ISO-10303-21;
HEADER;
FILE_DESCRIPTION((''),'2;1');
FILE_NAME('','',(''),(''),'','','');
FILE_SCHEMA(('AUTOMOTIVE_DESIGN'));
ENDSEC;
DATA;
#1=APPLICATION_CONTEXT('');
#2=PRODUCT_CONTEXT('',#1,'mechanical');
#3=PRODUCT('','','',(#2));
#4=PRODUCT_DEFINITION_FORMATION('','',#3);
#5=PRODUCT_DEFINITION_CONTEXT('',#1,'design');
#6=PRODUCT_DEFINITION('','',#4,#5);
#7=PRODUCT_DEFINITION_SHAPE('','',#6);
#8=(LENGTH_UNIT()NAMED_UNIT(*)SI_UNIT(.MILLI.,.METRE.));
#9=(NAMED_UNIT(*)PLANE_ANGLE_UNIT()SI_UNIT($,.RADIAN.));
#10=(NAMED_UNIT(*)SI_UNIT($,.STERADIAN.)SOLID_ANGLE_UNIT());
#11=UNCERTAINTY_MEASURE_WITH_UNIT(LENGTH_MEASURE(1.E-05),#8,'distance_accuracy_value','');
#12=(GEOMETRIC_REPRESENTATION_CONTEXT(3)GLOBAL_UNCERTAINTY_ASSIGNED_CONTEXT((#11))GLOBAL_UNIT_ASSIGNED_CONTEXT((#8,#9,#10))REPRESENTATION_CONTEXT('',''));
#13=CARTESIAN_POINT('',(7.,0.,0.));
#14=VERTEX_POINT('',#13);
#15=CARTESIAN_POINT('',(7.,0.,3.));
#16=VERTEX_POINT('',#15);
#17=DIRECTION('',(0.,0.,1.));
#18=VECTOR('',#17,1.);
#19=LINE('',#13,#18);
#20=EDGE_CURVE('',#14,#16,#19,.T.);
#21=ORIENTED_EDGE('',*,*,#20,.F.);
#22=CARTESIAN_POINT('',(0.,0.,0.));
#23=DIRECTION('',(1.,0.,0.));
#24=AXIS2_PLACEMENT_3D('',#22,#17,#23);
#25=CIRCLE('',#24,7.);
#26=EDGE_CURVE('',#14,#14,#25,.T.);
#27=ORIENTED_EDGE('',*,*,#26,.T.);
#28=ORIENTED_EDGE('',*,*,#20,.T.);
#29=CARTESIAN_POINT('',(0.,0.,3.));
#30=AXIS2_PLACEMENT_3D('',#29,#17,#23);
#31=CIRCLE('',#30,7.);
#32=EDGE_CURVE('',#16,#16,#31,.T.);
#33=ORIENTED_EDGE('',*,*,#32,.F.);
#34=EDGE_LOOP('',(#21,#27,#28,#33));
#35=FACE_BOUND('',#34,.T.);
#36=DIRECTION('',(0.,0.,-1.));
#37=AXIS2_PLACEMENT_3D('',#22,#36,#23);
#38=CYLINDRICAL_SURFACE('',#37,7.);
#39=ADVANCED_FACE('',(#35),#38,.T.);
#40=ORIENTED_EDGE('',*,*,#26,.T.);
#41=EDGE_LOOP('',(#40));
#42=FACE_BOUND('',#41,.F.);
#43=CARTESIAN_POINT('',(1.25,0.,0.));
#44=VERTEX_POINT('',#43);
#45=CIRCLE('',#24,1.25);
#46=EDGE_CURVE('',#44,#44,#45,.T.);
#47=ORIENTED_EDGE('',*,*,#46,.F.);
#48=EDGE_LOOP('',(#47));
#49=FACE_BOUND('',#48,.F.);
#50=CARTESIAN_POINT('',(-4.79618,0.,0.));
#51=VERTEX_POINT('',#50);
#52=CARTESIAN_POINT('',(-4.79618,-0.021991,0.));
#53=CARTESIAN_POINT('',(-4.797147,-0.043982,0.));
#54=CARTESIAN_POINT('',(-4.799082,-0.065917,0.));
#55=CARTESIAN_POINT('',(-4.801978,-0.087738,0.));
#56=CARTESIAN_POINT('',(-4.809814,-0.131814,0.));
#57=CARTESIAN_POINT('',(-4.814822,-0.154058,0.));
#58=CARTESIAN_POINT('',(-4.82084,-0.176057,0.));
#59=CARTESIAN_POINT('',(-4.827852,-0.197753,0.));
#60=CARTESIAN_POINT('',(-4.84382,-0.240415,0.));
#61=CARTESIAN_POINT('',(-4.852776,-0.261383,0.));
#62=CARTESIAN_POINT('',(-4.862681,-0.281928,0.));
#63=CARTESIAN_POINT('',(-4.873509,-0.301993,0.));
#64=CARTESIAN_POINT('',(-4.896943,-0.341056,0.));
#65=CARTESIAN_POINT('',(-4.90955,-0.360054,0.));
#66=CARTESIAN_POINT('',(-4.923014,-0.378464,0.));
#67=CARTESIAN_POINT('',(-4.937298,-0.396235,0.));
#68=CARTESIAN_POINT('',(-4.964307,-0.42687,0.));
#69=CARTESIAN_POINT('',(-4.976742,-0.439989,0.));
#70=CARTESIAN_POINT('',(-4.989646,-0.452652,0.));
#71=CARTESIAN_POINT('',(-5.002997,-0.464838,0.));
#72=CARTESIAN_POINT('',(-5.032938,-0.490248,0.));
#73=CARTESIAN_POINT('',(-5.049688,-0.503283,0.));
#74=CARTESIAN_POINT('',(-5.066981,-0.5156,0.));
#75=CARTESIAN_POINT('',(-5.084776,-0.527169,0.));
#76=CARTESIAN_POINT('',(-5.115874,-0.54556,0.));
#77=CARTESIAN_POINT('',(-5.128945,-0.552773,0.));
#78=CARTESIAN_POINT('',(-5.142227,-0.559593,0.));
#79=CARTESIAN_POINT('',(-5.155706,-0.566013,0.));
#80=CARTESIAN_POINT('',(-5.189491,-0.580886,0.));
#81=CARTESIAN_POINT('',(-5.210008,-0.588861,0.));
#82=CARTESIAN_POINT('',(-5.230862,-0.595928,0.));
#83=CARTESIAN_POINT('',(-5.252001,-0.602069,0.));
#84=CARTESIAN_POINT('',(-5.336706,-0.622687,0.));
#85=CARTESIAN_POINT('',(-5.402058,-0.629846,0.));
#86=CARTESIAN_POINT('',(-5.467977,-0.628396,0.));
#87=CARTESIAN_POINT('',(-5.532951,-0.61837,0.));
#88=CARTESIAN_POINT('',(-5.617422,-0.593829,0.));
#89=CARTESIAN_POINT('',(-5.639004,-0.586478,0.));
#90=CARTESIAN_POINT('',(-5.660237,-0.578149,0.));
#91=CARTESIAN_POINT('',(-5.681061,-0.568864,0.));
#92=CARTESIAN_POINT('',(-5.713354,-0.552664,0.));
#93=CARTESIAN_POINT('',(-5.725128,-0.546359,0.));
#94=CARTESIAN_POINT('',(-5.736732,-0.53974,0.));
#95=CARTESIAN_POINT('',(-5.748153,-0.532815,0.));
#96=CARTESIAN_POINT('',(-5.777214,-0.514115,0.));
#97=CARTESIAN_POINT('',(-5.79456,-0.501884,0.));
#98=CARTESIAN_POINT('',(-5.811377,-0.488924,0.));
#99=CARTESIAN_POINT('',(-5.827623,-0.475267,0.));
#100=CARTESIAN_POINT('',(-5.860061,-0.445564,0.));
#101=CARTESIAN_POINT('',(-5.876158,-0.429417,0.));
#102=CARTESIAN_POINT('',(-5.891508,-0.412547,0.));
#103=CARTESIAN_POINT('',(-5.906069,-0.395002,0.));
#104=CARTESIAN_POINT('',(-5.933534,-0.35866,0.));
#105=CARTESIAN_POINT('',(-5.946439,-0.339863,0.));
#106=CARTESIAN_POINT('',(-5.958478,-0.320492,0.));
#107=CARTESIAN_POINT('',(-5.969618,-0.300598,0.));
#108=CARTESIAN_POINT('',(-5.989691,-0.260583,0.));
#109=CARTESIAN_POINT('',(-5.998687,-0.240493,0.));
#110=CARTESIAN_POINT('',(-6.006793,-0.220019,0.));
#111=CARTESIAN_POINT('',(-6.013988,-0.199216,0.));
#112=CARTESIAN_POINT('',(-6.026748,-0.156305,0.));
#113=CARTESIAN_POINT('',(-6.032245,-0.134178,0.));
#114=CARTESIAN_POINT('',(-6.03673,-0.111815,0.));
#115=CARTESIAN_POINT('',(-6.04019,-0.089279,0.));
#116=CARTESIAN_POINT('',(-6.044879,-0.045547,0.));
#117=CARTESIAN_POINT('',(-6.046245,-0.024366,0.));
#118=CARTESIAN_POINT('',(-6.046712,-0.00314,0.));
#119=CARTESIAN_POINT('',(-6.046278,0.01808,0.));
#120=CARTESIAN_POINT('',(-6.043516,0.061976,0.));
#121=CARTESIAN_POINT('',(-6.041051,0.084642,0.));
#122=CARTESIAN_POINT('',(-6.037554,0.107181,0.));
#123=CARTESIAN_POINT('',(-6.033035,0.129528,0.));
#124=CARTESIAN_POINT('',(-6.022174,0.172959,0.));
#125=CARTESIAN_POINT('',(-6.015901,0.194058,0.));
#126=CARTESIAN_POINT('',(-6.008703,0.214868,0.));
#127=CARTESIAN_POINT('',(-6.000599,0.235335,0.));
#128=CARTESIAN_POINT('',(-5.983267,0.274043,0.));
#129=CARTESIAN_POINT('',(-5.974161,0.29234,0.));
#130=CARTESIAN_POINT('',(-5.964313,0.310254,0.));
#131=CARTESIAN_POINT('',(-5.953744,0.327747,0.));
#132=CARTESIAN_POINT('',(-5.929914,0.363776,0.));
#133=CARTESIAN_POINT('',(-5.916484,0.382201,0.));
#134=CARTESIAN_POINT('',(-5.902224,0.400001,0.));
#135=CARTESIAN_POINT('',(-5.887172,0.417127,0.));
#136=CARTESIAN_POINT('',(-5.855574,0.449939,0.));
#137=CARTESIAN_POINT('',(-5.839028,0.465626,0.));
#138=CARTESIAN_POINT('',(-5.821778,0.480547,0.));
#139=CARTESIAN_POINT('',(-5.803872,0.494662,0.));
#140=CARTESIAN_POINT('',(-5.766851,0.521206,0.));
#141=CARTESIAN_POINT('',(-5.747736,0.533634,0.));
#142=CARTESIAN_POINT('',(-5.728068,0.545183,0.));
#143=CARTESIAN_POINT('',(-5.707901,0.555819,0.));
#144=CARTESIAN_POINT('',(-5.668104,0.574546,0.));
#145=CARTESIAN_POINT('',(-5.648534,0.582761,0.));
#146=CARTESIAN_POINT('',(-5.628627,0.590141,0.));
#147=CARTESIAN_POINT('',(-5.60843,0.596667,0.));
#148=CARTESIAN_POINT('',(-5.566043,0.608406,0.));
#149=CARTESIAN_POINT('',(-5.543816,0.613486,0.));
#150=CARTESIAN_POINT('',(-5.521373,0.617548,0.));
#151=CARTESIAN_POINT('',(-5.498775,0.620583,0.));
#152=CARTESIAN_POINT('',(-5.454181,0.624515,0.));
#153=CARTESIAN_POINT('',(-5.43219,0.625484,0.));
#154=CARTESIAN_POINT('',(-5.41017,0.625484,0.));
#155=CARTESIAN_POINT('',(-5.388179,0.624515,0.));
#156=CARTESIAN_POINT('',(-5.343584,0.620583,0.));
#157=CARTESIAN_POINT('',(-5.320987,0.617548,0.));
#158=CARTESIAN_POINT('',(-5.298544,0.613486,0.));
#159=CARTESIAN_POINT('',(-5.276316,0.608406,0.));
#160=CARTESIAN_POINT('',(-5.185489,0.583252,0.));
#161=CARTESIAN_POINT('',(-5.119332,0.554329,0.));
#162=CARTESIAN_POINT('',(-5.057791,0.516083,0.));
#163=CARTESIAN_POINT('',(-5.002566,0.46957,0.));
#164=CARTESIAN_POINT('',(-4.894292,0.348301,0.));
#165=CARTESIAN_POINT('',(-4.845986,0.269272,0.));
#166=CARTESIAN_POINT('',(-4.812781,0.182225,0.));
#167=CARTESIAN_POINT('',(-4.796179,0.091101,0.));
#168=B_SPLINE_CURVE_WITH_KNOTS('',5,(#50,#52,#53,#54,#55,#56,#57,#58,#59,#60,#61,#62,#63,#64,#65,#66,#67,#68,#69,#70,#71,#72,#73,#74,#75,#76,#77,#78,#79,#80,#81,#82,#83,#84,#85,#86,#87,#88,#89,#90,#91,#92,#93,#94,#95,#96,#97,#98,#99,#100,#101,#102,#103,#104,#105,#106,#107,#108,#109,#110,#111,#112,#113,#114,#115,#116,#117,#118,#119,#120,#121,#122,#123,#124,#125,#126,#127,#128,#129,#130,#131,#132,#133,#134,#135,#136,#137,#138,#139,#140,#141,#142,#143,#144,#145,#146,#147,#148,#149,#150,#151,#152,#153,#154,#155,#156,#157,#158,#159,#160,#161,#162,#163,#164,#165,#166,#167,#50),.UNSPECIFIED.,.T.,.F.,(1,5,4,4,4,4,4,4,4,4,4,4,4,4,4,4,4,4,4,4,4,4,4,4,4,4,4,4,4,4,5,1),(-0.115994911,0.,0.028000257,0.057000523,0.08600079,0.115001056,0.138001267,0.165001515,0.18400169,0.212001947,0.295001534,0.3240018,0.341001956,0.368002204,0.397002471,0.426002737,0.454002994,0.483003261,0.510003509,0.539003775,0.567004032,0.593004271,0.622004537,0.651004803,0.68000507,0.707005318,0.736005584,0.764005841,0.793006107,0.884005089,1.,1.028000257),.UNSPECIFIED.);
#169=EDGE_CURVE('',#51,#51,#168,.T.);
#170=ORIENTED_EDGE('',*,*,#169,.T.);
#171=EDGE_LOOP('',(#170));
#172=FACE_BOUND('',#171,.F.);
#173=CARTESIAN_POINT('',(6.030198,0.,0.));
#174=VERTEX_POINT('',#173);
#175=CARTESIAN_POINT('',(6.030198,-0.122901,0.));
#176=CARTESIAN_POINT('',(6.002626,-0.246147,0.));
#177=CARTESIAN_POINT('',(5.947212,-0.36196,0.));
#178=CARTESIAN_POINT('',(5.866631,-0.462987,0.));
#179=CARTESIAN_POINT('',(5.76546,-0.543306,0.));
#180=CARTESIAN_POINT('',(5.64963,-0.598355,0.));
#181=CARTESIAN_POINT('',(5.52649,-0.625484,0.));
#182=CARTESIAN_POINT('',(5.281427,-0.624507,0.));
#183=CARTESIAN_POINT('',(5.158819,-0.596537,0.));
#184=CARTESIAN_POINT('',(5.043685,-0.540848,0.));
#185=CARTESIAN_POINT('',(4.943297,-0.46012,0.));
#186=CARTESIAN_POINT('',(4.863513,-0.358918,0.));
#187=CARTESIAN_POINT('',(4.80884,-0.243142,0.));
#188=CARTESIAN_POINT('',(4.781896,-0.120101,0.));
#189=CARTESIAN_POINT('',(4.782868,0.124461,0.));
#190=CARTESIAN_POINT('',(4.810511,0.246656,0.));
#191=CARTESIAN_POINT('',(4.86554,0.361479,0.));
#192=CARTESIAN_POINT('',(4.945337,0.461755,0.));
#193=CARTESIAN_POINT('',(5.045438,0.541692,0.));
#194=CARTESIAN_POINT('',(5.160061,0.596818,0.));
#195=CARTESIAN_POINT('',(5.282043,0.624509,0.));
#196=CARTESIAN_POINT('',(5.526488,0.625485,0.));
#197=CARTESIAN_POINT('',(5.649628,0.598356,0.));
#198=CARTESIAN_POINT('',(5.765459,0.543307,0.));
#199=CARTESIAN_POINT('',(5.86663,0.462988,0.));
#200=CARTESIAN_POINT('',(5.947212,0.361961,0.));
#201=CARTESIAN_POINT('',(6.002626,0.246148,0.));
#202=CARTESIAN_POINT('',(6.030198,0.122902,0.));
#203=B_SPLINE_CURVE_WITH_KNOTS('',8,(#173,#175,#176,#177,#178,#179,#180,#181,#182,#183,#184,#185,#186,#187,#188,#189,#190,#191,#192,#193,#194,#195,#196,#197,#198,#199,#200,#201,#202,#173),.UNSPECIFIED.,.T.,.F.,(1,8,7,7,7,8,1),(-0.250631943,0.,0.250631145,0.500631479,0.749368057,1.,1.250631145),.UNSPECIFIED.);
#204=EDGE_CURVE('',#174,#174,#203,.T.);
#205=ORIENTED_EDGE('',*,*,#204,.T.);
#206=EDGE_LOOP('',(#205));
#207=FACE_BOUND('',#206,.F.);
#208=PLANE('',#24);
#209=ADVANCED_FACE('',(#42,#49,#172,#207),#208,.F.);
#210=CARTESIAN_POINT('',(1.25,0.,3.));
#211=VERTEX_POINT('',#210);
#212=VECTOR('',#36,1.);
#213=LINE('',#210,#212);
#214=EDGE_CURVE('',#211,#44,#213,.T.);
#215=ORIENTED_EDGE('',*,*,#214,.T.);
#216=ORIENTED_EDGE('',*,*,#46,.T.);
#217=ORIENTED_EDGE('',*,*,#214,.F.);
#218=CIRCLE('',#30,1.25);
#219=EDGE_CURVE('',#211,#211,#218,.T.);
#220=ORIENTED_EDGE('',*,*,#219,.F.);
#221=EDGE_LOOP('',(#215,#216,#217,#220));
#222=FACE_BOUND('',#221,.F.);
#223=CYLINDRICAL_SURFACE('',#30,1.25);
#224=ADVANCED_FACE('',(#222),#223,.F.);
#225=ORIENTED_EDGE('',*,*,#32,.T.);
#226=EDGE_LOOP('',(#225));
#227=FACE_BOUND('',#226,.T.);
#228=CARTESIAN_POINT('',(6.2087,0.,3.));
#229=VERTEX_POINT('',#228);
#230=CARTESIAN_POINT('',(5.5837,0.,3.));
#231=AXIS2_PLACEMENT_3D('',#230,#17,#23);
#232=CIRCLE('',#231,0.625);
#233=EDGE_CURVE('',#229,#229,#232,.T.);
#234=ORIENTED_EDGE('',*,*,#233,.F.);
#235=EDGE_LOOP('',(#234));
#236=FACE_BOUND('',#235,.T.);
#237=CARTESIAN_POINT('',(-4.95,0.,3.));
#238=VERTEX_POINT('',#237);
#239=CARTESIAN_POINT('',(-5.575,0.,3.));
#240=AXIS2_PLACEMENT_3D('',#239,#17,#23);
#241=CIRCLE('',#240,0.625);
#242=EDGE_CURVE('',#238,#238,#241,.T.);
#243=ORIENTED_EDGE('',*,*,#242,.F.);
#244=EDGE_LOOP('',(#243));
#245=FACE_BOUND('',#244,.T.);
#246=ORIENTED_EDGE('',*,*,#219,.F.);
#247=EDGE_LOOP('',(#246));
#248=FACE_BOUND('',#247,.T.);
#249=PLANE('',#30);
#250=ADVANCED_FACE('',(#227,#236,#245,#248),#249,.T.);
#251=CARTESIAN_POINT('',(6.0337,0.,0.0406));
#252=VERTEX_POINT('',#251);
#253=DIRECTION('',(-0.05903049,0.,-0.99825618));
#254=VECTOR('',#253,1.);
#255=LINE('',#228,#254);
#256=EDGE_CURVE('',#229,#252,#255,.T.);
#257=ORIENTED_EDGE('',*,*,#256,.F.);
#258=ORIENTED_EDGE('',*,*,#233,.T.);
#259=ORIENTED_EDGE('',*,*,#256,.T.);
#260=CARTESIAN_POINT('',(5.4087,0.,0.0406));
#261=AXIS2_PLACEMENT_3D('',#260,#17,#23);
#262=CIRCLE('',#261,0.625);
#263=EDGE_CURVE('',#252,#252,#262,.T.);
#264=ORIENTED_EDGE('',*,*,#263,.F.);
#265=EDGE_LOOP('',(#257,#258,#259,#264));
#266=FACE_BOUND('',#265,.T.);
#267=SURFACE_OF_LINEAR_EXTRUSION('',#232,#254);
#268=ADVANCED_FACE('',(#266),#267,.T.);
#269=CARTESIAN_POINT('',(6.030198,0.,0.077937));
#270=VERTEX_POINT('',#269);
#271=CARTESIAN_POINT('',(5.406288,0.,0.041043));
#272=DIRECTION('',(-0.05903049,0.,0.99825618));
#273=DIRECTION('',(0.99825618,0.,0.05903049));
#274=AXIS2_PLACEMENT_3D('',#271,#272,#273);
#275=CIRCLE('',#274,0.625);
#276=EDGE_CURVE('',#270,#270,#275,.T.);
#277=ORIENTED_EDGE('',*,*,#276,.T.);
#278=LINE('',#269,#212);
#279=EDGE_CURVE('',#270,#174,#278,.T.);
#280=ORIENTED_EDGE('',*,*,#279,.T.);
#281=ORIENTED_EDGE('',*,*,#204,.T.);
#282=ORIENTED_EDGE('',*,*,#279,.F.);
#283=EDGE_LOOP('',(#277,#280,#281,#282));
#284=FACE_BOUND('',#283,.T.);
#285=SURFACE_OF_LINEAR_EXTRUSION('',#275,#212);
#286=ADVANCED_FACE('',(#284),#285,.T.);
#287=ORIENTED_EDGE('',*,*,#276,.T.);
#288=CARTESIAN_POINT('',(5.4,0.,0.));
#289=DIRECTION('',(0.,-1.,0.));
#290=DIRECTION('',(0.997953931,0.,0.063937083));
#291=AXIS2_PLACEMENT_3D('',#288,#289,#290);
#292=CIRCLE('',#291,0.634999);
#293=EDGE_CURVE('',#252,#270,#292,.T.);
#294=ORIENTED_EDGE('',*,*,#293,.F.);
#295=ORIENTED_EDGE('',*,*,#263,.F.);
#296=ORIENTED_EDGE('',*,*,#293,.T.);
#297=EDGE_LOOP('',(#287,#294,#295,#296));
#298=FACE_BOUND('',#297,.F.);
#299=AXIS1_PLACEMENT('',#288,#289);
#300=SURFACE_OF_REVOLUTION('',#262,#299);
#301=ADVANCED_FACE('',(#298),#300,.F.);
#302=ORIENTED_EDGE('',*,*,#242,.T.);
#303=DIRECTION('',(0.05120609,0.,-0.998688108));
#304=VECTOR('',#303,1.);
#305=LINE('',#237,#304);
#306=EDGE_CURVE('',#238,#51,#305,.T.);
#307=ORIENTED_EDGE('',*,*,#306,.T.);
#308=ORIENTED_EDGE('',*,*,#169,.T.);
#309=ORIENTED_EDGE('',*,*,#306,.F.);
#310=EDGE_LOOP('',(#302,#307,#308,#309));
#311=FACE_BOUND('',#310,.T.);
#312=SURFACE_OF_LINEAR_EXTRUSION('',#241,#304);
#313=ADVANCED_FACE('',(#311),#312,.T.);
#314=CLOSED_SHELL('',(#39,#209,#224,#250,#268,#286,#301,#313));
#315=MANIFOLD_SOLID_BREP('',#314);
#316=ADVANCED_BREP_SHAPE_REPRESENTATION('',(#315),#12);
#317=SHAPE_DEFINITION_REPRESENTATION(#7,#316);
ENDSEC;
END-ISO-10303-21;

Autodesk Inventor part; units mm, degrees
ref_plane "YZ Plane" through (0, 0, 0) normal (1, 0, 0) x (0, 1, 0)
ref_plane "XZ Plane" through (0, 0, 0) normal (0, 1, 0) x (-1, 0, 0)
ref_plane "XY Plane" through (0, 0, 0) normal (0, 0, 1) x (1, 0, 0)
sketch "Sketch1" plane through (0, 0, 0) normal (0, 0, 1) x (1, 0, 0)
  circle A0 centre (0, 0) radius 7
  dimension "d0" = 14
extrude "Extrusion1" add sketch "Sketch1" along normal blind 3
sketch "Sketch2" plane through (0, 0, 3) normal (0, 0, 1) x (1, 0, 0)
  circle A0 centre (0, 0) radius 1.25
  dimension "d3" = 2.5
extrude "Extrusion2" cut sketch "Sketch2" against normal blind 3
sketch "Sketch3" plane through (0, 0, 3) normal (0, 0, 1) x (1, 0, 0)
  circle A0 centre (-5.575, 0) radius 0.625
  circle A1 centre (0, 0) radius 7 projected
  circle A2 centre (5.575, 0) radius 0.625
  dimension "d6" = 1.25
  dimension "d7" = 1.25
  dimension "d9" = 0.8
  dimension "d10" = 0.8
  dimension "d12" = 9.9
sketch "Sketch4" plane through (0, 0, 0) normal (0, 1, 0) x (-1, 0, 0)
  line L0 (7, 3) -> (-7, 3) projected
  line L1 (5.5663, 3) -> (5.4, -0.2434)
  line L2 (7, 0) -> (7, 3) projected
  point P0 (0, 0)
  dimension "d13" = 1.6
sweep "Sweep1" cut profiles "Sketch3" path "Sketch4" path curves L1 contours A0
sketch "Sketch5" plane through (0, 0, 3) normal (0, 0, 1) x (1, 0, 0)
  circle A0 centre (5.5837, 0) radius 0.625
  circle A1 centre (-5.5663, 0) radius 0.625 projected
  point P0 (0, 0)
  dimension "d16" = 1.25
  dimension "d17" = 9.9
sketch "Sketch6" plane through (0, 0, 0) normal (0, 1, 0) x (-1, 0, 0)
  line L0 (-5.575, 2.9594) -> (-5.4, 0)
  line L1 (-7, 0) -> (7, 0) projected
  line L2 (-7, 0) -> (-7, 3) projected
  line L3 (-5.4, 0) -> (-5.4, -0.6456)
  point P0 (0, 0)
  dimension "d18" = 1.425
  dimension "d19" = 1.6
sweep "Sweep2" cut profiles "Sketch5" path "Sketch6" path curves L0 L3 contours A0
properties part number "MUSAB6" material "Bronze"
